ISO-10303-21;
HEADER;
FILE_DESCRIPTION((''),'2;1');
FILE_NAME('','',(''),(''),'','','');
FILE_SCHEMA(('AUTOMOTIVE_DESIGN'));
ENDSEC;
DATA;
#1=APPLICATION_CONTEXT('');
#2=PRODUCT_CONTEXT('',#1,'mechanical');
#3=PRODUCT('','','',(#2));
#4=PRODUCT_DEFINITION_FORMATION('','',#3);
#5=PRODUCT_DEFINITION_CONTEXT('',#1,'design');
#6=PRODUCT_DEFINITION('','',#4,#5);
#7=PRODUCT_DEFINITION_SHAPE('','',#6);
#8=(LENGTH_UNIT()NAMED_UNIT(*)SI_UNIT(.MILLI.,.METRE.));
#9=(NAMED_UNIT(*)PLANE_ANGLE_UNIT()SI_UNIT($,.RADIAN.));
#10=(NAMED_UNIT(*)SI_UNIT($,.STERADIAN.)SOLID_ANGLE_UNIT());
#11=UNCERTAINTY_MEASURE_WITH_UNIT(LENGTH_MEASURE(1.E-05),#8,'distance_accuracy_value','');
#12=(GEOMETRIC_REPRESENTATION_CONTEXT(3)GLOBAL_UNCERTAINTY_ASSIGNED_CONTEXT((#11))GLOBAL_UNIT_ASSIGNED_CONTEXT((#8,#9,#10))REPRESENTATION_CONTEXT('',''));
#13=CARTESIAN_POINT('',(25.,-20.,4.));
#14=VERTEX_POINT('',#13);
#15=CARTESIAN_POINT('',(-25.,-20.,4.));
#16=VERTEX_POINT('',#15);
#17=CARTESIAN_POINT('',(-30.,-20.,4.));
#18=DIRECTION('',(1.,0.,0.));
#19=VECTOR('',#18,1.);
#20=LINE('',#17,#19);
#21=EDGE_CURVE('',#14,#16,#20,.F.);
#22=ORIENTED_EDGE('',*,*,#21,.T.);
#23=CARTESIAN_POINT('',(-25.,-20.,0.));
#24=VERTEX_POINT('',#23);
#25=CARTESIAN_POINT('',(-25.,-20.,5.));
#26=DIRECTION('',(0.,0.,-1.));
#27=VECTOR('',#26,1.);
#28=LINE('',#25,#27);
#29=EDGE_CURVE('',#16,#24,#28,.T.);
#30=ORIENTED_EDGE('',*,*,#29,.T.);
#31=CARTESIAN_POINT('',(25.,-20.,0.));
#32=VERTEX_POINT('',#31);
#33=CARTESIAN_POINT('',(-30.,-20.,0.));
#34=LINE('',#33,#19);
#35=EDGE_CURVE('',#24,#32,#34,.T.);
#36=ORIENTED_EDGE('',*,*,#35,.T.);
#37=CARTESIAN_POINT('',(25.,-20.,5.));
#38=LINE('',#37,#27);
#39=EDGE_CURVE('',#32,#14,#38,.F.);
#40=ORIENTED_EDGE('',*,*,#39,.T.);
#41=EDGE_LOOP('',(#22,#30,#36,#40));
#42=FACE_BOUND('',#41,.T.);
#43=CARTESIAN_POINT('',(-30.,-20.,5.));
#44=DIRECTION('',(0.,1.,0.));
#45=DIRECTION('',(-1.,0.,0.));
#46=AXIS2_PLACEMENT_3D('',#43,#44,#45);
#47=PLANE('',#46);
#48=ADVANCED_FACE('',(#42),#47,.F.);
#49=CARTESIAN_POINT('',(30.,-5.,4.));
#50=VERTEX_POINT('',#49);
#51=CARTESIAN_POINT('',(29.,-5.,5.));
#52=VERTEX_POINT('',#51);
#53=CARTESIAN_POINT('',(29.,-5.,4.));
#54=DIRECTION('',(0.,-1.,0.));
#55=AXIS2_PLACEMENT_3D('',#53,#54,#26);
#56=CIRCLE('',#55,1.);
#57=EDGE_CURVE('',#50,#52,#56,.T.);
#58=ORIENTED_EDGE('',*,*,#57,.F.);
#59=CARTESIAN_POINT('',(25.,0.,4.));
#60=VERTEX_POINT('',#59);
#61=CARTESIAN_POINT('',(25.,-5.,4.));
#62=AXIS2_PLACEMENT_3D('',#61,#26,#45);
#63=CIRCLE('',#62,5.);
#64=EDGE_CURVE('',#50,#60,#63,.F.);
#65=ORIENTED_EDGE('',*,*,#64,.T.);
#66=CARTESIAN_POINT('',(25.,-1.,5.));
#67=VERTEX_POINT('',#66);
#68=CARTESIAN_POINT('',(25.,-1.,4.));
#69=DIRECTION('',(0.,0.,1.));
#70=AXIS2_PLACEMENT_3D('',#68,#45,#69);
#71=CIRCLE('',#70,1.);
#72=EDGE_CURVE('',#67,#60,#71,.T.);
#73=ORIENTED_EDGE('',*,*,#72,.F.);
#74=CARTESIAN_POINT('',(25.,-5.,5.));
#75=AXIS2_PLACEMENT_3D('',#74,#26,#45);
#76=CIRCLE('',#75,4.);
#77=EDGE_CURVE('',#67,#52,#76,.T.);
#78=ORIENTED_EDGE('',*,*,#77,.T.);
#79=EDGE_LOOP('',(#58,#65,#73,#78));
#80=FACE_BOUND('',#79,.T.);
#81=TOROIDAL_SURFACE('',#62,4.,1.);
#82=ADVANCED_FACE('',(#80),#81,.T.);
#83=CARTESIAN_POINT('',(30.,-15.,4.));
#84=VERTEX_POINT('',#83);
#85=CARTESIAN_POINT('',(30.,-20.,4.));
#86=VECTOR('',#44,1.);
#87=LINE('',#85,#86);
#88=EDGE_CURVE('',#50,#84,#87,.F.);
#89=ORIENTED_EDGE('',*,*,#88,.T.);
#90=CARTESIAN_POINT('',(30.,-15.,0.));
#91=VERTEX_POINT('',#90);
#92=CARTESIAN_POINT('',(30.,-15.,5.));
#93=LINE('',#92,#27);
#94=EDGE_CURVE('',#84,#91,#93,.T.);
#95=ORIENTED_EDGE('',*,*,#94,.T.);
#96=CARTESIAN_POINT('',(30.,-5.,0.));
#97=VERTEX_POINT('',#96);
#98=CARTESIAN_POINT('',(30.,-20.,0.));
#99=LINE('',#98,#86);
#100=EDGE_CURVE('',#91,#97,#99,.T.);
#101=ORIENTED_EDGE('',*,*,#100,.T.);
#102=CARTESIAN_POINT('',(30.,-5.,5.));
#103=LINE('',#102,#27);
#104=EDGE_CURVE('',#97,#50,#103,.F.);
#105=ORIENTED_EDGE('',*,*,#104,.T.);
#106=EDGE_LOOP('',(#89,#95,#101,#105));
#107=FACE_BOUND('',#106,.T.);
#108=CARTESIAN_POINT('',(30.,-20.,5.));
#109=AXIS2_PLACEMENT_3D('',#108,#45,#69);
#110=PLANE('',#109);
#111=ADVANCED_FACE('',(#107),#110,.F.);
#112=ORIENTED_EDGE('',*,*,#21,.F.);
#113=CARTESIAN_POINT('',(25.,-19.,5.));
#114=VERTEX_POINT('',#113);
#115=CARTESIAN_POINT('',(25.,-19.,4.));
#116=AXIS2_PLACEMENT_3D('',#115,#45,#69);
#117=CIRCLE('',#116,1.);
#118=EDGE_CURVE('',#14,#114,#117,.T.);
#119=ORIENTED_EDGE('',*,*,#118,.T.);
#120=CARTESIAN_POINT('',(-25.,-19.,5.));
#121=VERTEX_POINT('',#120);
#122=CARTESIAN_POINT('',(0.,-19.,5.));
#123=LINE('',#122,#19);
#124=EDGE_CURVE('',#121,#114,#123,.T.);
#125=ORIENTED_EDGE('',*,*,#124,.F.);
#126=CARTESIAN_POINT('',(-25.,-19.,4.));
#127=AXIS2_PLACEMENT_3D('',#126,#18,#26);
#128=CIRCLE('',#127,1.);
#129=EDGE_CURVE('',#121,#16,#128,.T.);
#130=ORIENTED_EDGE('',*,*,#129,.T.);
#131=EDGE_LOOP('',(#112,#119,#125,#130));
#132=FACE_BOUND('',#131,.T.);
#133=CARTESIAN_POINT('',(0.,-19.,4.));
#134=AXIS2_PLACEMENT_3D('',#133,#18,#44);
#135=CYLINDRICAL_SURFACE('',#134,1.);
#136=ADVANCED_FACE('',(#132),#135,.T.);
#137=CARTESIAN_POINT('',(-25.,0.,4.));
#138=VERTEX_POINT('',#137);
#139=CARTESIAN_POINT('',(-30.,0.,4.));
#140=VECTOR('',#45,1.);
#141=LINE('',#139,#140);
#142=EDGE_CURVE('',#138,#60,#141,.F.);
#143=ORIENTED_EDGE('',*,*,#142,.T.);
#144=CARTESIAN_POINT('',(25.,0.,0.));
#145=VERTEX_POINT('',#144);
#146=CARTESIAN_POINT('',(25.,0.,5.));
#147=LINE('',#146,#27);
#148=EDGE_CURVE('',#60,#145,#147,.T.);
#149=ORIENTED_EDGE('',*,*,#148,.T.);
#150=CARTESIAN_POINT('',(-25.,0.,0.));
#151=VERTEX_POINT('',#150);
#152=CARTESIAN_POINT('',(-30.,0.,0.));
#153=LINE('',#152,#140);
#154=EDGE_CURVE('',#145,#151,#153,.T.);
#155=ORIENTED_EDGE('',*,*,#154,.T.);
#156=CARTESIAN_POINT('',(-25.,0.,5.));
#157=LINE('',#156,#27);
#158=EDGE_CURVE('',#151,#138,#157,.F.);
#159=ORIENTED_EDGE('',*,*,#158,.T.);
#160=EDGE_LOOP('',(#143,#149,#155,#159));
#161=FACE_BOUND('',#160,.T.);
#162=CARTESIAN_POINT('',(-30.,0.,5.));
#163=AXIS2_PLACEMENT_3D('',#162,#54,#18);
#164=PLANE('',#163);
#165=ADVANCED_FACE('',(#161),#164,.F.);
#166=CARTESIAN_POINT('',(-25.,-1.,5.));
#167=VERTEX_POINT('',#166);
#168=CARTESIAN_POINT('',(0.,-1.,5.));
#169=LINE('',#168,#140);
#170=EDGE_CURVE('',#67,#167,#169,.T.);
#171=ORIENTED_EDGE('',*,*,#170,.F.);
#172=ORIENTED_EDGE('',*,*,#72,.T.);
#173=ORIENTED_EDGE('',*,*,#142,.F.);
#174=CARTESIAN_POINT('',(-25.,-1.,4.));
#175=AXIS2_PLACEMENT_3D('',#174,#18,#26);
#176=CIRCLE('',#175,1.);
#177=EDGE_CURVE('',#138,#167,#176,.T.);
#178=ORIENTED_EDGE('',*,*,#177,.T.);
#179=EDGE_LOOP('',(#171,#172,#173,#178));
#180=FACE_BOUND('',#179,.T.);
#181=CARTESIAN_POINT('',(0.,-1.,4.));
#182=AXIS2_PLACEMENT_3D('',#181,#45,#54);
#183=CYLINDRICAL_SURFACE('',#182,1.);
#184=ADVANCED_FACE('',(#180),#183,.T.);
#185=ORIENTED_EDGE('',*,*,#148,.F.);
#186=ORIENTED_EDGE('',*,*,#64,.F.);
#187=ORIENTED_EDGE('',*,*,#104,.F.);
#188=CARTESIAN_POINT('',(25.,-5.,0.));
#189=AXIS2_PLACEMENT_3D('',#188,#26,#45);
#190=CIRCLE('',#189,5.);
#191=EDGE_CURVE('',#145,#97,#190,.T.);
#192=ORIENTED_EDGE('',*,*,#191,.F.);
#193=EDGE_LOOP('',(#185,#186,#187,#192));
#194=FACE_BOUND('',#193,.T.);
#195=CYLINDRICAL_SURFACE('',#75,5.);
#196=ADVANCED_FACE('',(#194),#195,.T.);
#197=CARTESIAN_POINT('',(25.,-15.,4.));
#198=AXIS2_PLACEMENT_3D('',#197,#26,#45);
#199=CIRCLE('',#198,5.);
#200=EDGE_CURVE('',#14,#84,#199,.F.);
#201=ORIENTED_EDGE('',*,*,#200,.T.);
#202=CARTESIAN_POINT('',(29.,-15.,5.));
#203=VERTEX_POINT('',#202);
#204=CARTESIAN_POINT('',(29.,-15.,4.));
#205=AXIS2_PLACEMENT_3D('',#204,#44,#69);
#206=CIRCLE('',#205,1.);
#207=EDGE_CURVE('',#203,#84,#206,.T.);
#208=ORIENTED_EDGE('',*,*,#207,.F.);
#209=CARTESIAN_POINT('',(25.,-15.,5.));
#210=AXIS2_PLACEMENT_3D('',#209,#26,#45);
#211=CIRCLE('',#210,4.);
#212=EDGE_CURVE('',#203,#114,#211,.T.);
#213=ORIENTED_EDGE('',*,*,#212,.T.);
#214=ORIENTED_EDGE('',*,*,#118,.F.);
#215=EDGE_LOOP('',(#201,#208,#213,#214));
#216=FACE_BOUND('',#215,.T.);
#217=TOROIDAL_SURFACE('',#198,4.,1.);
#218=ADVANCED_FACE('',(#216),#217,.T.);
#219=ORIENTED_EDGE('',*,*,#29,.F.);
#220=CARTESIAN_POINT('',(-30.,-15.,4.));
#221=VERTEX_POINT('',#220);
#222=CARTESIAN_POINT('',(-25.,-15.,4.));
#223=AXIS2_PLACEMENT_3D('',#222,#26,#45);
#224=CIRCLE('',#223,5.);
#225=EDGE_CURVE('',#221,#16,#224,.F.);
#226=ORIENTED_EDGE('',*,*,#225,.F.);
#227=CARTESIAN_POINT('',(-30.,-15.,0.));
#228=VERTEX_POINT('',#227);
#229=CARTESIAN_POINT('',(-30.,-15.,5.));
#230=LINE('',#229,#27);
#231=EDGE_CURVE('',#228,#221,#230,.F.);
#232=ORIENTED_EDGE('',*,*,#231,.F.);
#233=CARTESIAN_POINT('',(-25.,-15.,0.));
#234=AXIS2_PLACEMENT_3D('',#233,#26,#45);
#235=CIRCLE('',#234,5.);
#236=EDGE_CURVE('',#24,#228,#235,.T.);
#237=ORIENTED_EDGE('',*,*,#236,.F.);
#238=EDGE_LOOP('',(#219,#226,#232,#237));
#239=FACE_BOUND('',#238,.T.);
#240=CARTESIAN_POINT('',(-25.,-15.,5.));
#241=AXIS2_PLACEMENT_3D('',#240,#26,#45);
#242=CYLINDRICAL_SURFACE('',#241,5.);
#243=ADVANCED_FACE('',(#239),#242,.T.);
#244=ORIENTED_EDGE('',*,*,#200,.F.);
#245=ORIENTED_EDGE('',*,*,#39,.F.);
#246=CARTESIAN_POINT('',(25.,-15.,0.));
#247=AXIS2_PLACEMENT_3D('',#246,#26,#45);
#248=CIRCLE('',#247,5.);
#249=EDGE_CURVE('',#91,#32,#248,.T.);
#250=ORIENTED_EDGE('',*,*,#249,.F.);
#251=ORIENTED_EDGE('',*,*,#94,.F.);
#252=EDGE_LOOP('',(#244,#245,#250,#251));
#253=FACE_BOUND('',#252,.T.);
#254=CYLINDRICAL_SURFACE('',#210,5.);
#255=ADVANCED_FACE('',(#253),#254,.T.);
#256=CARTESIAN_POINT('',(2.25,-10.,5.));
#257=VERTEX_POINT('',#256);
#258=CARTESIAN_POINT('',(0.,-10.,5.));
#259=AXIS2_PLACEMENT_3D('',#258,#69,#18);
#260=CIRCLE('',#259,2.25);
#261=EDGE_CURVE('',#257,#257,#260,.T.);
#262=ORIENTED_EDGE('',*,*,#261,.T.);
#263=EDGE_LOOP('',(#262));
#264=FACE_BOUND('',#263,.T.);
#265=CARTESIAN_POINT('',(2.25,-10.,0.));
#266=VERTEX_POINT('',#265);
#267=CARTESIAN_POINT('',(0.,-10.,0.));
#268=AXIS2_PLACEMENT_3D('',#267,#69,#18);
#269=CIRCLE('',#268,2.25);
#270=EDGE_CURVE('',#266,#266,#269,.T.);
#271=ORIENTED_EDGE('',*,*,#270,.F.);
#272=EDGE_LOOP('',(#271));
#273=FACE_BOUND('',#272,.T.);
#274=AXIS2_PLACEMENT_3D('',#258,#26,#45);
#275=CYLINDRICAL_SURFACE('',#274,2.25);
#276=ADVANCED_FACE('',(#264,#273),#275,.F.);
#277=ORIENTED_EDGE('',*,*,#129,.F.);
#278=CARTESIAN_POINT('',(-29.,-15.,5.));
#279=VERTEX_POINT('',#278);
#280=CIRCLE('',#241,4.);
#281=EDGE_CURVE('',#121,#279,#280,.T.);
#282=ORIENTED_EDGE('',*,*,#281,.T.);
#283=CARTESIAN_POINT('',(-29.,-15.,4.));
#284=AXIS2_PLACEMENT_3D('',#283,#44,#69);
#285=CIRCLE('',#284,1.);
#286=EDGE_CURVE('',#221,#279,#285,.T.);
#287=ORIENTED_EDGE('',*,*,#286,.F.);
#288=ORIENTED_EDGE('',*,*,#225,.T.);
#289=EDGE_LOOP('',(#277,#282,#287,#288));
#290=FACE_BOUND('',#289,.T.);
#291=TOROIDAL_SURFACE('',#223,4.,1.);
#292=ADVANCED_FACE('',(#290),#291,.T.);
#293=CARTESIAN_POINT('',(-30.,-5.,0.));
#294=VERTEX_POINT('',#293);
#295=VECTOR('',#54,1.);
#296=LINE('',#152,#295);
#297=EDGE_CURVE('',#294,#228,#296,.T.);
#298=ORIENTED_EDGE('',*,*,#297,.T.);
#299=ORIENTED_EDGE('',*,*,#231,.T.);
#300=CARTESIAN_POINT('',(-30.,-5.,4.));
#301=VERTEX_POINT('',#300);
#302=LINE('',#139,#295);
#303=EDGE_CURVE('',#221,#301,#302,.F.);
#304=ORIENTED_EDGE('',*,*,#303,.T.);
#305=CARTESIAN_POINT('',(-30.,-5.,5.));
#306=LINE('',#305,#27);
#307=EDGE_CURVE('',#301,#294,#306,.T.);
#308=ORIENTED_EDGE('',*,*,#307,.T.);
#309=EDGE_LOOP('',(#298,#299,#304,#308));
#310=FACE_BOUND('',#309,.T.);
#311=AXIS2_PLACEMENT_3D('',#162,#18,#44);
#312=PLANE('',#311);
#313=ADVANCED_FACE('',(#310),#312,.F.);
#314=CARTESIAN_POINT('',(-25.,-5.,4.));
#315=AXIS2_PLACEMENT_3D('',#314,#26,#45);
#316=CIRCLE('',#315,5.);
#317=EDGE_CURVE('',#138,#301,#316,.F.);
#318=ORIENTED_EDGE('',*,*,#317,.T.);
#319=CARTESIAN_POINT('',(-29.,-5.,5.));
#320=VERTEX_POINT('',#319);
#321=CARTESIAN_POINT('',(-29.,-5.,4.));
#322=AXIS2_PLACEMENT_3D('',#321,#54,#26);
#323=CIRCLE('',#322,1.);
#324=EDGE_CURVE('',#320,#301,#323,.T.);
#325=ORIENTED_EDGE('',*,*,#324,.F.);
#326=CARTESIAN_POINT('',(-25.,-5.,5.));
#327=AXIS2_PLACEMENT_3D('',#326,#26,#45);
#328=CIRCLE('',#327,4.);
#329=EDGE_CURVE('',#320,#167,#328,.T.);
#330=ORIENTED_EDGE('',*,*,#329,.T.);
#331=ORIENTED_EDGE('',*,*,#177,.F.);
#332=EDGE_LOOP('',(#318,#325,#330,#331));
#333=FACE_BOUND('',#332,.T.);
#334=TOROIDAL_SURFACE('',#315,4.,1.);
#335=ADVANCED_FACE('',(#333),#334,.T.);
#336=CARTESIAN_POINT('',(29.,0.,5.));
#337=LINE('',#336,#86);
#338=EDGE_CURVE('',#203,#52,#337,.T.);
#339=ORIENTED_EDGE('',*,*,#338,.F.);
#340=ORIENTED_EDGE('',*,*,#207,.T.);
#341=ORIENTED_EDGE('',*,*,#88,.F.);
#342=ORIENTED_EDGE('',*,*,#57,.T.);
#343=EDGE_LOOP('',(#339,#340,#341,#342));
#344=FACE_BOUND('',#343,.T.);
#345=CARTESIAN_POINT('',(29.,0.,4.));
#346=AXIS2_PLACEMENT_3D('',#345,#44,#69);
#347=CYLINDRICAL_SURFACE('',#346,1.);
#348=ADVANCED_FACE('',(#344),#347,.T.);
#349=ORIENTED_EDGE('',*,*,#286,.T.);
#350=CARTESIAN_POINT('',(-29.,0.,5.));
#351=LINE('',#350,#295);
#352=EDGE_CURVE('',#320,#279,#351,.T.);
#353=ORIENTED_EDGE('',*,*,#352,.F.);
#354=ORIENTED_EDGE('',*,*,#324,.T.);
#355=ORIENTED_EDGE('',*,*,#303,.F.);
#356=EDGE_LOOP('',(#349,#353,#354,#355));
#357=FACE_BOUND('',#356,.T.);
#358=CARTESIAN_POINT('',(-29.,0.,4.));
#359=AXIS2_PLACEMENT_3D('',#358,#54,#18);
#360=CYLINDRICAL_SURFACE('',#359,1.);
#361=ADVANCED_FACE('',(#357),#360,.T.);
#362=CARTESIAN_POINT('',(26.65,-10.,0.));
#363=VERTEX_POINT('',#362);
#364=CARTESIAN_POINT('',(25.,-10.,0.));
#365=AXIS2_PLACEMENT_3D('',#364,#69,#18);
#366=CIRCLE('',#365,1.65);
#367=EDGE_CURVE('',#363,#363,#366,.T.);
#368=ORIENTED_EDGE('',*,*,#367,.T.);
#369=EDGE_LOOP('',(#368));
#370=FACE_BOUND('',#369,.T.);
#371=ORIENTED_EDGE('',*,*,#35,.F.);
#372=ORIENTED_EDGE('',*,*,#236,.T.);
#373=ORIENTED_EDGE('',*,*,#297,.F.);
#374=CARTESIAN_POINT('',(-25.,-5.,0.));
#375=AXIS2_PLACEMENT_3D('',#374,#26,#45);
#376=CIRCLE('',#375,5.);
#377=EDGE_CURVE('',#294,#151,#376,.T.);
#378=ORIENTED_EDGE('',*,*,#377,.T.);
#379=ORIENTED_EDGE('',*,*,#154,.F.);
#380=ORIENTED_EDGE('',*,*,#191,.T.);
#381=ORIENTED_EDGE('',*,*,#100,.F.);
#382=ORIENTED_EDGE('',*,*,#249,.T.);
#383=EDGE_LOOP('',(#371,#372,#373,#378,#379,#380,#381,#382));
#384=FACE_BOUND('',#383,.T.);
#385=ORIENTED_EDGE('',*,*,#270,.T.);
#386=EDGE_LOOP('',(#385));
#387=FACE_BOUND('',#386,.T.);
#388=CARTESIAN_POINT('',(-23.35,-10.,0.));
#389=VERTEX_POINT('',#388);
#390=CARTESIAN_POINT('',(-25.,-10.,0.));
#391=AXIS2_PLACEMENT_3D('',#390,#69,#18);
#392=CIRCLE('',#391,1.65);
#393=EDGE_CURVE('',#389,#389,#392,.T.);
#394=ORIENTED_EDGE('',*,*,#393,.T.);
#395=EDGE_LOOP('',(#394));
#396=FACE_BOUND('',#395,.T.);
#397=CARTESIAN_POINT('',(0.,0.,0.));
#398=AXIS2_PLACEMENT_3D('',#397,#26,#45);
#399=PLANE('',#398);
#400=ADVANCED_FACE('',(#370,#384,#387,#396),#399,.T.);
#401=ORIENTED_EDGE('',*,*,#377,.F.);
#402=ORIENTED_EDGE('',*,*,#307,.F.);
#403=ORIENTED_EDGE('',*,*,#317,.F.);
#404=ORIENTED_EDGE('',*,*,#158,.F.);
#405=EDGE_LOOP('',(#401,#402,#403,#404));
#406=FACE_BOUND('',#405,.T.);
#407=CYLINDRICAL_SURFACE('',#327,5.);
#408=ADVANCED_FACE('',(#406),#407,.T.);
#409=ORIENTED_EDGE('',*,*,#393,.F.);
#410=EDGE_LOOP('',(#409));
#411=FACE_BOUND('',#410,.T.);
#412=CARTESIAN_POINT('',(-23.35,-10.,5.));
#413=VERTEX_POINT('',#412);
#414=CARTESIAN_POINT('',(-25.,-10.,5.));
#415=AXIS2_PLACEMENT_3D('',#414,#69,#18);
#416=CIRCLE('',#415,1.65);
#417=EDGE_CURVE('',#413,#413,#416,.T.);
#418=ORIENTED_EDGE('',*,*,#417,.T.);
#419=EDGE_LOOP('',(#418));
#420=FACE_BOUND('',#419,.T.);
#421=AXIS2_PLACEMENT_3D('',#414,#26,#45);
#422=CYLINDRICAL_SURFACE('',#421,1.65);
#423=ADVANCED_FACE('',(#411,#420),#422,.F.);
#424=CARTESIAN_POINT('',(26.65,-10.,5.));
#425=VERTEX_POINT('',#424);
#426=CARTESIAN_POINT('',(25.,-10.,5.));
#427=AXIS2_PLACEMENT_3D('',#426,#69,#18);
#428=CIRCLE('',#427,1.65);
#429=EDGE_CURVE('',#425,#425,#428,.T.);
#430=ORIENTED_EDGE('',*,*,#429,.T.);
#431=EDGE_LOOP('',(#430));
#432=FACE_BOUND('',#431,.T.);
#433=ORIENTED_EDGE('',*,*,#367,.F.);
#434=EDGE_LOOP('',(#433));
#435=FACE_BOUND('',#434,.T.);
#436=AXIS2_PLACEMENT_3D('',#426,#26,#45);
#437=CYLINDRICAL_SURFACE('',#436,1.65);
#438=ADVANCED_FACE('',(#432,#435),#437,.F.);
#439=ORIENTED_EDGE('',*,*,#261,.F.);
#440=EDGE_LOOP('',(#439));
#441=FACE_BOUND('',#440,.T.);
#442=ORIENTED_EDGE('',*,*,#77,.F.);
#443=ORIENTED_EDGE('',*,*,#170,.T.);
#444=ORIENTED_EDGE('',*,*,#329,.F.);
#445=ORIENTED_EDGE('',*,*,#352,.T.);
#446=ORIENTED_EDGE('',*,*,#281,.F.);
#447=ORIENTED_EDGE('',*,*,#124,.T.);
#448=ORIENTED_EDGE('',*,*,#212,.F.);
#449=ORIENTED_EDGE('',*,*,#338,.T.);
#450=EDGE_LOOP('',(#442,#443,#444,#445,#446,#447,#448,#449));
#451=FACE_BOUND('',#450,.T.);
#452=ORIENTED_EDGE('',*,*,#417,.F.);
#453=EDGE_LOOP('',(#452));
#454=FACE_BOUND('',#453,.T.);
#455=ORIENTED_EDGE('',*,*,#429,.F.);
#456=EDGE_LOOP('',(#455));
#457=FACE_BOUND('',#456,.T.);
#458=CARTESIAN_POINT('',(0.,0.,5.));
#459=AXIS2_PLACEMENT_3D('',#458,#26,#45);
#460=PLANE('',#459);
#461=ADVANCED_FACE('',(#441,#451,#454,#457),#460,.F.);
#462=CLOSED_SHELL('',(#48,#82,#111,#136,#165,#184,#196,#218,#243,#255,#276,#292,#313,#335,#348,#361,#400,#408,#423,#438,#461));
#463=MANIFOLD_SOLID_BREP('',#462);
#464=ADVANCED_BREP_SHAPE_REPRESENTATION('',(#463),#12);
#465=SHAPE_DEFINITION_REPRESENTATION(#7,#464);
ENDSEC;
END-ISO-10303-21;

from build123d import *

# Parameters (mm, degrees)
ESQUISSE1_W        = 60
ESQUISSE1_H        = 20
ESQUISSE1_R        = 2.25
ESQUISSE1_R_2      = 1.65
BOSS_EXTRU_1_DEPTH = 5
CONG_1_R           = 1
CONG_3_R           = 5


with BuildPart() as part:
    # Esquisse1 → Boss.-Extru.1 (new body)
    with BuildSketch(Plane.XY):
        with Locations((0, -10)):
            Rectangle(ESQUISSE1_W, ESQUISSE1_H)
        with Locations((0, -10)):
            Circle(ESQUISSE1_R, mode=Mode.SUBTRACT)
        with Locations((25, -10)):
            Circle(ESQUISSE1_R_2, mode=Mode.SUBTRACT)
        with Locations((-25, -10)):
            Circle(ESQUISSE1_R_2, mode=Mode.SUBTRACT)
    extrude(amount=BOSS_EXTRU_1_DEPTH)

    # Congé1
    cong_1_edges = [part.edges().sort_by_distance(p)[0] for p in [
        (-30, -10, 5),
        (0, -20, 5),
        (30, -10, 5),
        (0, 0, 5),
    ]]
    fillet(cong_1_edges, radius=CONG_1_R)

    # Congé3
    # the kernel refuses this fillet: 5 mm, written as the material it takes off along each edge
    with BuildSketch(Plane(origin=(-25, -5, 5), x_dir=(0, 1, 0), z_dir=(1, 0, 0))) as cong_3_piece_1:
        with BuildLine():
            CenterArc((4, -1), 1, 0, 90)
            Line((5, -1), (5, 0))
            Line((5, 0), (4, 0))
        make_face()
    revolve(axis=Axis((-25, -5, 5), (0, 0, 1)), revolution_arc=90, mode=Mode.SUBTRACT)
    with BuildSketch(Plane(origin=(25, -5, 5), x_dir=(1, 0, 0), z_dir=(0, -1, 0))) as cong_3_piece_2:
        with BuildLine():
            CenterArc((4, -1), 1, 0, 90)
            Line((5, -1), (5, 0))
            Line((5, 0), (4, 0))
        make_face()
    revolve(axis=Axis((25, -5, 5), (0, 0, 1)), revolution_arc=90, mode=Mode.SUBTRACT)
    with BuildSketch(Plane(origin=(-25, -15, 5), x_dir=(-1, 0, 0), z_dir=(0, 1, 0))) as cong_3_piece_3:
        with BuildLine():
            CenterArc((4, -1), 1, 0, 90)
            Line((5, -1), (5, 0))
            Line((5, 0), (4, 0))
        make_face()
    revolve(axis=Axis((-25, -15, 5), (0, 0, 1)), revolution_arc=90, mode=Mode.SUBTRACT)
    with BuildSketch(Plane(origin=(25, -15, 5), x_dir=(0, -1, 0), z_dir=(-1, 0, 0))) as cong_3_piece_4:
        with BuildLine():
            CenterArc((4, -1), 1, 0, 90)
            Line((5, -1), (5, 0))
            Line((5, 0), (4, 0))
        make_face()
    revolve(axis=Axis((25, -15, 5), (0, 0, 1)), revolution_arc=90, mode=Mode.SUBTRACT)
    with BuildSketch(Plane(origin=(30, -20, -12.5), x_dir=(0, 1, 0), z_dir=(0, 0, 1)), Plane(origin=(30, 0, -12.5), x_dir=(-1, 0, 0), z_dir=(0, 0, 1))) as cong_3_piece_5:
        with BuildLine():
            CenterArc((CONG_3_R, CONG_3_R), CONG_3_R, 180, 90)
            Line((0, CONG_3_R), (0, 0))
            Line((0, 0), (CONG_3_R, 0))
        make_face()
    extrude(amount=17.5, mode=Mode.SUBTRACT)
    with BuildSketch(Plane(origin=(-30, -20, -12.5), x_dir=(0, 1, 0), z_dir=(0, 0, 1)), Plane(origin=(-30, 0, -12.5), x_dir=(1, 0, 0), z_dir=(0, 0, 1))) as cong_3_piece_6:
        with BuildLine():
            CenterArc((CONG_3_R, -CONG_3_R), CONG_3_R, 90, 90)
            Line((0, -CONG_3_R), (0, 0))
            Line((0, 0), (CONG_3_R, 0))
        make_face()
    extrude(amount=17.5, mode=Mode.SUBTRACT)


solid = part.part
